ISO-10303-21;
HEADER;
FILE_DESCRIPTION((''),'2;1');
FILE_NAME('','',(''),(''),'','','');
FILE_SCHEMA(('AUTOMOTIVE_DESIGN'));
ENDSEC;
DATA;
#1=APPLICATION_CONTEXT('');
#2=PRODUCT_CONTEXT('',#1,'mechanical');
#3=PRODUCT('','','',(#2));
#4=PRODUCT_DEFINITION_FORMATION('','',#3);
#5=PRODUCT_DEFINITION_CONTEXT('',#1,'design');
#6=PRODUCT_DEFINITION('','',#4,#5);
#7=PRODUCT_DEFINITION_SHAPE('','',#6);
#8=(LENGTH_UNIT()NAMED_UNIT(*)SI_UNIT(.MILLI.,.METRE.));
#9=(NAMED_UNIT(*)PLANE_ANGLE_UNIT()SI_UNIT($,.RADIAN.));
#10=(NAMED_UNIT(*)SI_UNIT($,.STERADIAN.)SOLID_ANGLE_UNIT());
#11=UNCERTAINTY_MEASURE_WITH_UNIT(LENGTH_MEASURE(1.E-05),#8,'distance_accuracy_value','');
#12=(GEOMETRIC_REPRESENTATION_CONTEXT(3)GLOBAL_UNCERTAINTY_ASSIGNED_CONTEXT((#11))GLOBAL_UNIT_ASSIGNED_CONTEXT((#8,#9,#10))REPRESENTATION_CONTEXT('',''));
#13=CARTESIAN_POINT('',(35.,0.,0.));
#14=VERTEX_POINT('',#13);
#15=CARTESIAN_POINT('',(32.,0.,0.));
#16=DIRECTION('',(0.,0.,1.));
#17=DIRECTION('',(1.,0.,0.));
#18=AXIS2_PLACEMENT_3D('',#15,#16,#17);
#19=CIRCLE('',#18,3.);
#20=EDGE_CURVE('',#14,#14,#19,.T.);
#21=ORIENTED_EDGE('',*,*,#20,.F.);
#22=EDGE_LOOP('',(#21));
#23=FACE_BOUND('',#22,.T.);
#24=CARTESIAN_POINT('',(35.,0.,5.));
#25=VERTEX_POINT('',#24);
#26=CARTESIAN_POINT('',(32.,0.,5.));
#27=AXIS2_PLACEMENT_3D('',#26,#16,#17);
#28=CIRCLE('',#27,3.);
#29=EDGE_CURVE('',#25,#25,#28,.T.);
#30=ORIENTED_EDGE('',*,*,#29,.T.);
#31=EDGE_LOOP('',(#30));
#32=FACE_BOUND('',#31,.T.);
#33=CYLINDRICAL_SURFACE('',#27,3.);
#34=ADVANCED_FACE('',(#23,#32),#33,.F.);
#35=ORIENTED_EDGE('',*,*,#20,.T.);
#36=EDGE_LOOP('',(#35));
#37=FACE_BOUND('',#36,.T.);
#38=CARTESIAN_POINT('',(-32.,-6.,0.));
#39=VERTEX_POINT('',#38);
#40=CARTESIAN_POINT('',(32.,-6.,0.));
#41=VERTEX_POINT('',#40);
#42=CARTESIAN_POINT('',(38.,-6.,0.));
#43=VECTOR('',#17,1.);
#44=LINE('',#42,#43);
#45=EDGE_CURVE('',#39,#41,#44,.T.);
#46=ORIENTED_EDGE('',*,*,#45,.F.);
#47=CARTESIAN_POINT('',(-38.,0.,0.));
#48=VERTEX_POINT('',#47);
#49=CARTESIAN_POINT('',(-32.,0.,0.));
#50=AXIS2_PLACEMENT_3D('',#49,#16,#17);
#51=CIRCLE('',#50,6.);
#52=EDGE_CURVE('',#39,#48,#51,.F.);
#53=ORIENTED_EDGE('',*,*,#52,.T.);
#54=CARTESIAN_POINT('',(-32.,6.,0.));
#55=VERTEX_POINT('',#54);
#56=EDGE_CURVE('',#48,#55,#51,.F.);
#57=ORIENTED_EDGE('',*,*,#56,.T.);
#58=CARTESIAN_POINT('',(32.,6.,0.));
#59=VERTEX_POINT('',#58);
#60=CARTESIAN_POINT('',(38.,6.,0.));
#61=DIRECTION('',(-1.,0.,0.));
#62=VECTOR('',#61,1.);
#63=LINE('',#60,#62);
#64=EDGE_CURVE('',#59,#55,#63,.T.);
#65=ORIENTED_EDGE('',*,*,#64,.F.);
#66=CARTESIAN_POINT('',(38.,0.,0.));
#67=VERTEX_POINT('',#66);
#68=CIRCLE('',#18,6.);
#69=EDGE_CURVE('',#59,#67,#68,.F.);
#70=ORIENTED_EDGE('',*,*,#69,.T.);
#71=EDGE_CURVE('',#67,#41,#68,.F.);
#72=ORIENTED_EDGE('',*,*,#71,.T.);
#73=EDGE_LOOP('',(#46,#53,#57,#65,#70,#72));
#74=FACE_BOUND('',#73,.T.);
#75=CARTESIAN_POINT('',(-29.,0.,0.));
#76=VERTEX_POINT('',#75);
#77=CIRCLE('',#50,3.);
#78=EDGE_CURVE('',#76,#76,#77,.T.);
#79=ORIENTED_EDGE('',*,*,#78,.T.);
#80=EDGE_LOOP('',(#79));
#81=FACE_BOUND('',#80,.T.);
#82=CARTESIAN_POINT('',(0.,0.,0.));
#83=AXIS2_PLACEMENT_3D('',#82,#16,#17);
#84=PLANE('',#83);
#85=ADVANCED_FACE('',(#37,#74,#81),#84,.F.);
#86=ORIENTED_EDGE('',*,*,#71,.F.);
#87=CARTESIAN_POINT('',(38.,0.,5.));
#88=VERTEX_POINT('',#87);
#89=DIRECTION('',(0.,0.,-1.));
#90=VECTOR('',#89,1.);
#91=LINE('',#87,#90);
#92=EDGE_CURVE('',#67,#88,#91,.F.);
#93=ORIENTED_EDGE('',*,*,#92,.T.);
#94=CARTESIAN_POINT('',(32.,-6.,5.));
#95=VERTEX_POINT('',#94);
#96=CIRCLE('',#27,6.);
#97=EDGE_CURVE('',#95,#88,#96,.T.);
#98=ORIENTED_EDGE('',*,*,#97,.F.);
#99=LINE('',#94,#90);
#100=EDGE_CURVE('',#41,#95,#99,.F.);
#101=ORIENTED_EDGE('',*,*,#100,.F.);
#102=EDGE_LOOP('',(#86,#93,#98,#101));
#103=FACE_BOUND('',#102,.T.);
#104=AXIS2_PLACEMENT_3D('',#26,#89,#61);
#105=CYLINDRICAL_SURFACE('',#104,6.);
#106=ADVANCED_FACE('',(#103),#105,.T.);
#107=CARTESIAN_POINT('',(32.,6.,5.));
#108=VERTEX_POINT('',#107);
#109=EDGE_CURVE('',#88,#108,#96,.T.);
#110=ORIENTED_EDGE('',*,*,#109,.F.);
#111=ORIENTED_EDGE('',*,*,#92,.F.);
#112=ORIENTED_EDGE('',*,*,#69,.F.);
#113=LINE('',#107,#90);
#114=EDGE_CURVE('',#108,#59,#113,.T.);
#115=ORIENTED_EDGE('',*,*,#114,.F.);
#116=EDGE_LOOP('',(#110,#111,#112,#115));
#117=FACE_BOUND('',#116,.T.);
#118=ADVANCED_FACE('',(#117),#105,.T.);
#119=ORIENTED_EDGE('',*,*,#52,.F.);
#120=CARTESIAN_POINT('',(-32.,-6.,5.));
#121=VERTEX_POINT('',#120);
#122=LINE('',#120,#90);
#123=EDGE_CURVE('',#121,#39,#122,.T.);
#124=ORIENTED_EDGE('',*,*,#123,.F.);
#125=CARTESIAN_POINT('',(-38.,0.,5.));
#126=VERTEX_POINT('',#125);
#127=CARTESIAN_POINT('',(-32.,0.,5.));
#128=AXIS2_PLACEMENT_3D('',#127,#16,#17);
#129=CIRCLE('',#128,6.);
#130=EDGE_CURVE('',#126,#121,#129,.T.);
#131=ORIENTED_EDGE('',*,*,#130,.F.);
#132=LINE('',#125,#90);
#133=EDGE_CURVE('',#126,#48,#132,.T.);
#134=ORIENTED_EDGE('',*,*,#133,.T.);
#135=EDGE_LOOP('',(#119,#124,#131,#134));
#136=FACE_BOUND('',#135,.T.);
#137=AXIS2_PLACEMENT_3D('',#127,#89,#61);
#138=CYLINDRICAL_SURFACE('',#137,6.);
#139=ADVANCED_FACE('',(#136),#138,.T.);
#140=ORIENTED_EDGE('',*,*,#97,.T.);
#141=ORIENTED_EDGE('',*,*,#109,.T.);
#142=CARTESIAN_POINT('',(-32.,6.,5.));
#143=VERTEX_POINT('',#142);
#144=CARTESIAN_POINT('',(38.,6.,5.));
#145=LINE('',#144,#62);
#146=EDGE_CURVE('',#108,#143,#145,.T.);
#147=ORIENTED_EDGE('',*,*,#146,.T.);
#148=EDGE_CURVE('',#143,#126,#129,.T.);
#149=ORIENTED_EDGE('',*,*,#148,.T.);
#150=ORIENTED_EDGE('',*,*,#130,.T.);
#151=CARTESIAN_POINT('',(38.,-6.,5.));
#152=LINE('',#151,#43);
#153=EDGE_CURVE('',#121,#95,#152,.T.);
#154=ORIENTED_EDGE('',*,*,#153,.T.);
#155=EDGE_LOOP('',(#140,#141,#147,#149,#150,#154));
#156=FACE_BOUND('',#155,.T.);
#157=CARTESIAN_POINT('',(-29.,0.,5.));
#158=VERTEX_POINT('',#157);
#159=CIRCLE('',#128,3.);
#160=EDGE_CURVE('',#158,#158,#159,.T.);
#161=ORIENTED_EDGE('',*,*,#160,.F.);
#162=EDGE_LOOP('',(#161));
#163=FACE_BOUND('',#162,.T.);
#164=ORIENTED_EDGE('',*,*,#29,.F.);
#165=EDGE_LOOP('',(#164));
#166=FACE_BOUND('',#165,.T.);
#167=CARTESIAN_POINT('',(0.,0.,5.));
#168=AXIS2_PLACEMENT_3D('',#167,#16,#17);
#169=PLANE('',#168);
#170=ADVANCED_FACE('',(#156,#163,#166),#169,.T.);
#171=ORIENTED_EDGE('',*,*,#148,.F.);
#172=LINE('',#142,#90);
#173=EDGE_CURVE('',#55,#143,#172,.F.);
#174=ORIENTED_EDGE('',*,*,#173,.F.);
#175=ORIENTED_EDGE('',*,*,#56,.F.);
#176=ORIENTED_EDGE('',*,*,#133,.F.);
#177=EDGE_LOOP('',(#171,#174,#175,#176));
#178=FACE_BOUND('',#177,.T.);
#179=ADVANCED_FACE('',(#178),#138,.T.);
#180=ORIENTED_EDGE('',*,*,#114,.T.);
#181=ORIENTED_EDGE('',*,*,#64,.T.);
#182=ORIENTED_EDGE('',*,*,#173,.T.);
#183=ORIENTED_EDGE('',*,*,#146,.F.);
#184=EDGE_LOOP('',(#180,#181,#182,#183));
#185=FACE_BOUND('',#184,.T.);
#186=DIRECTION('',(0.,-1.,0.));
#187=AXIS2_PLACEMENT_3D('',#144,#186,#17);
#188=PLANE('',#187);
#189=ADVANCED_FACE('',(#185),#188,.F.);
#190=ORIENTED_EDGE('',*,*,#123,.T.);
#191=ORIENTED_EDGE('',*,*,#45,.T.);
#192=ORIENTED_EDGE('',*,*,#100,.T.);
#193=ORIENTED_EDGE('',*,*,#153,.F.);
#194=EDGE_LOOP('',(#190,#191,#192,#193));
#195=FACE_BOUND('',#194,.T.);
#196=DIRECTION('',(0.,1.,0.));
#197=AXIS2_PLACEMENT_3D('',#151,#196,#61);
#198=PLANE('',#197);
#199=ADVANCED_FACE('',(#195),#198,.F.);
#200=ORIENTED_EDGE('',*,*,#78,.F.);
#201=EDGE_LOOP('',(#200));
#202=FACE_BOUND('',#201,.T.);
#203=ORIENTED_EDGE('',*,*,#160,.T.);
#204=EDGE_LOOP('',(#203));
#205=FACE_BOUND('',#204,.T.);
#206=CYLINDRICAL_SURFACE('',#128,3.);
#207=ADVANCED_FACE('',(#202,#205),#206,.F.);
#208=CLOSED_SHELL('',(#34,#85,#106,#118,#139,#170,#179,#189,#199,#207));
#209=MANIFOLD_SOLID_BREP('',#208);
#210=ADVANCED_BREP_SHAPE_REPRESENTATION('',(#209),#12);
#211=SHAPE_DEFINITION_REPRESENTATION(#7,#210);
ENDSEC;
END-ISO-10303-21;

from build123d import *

# Parameters (mm, degrees)
SKIZZE1_W                       = 76
SKIZZE1_H                       = 12
AUFSATZ_LINEAR_AUSTRAGEN1_DEPTH = 5
VERRUNDUNG1_R                   = 6
F_6_0_6_DURCHMESSER_BOHRUNG3_D  = 6


with BuildPart() as part:
    # Skizze1 → Aufsatz-Linear austragen1 (new body)
    with BuildSketch(Plane.XY):
        Rectangle(SKIZZE1_W, SKIZZE1_H)
    extrude(amount=AUFSATZ_LINEAR_AUSTRAGEN1_DEPTH)

    # Verrundung1
    verrundung1_edges = [part.edges().sort_by_distance(p)[0] for p in [
        (-38, -6, 2.5),
        (38, -6, 2.5),
        (38, 6, 2.5),
        (-38, 6, 2.5),
    ]]
    fillet(verrundung1_edges, radius=VERRUNDUNG1_R - 0.0001)  # a hair under: the kernel refuses the full size

    # Ø6.0 (6) Durchmesser Bohrung3 (through all)
    with Locations(Plane.XY.offset(5)):
        with Locations((-32, 0), (32, 0)):
            Hole(F_6_0_6_DURCHMESSER_BOHRUNG3_D / 2)


solid = part.part
